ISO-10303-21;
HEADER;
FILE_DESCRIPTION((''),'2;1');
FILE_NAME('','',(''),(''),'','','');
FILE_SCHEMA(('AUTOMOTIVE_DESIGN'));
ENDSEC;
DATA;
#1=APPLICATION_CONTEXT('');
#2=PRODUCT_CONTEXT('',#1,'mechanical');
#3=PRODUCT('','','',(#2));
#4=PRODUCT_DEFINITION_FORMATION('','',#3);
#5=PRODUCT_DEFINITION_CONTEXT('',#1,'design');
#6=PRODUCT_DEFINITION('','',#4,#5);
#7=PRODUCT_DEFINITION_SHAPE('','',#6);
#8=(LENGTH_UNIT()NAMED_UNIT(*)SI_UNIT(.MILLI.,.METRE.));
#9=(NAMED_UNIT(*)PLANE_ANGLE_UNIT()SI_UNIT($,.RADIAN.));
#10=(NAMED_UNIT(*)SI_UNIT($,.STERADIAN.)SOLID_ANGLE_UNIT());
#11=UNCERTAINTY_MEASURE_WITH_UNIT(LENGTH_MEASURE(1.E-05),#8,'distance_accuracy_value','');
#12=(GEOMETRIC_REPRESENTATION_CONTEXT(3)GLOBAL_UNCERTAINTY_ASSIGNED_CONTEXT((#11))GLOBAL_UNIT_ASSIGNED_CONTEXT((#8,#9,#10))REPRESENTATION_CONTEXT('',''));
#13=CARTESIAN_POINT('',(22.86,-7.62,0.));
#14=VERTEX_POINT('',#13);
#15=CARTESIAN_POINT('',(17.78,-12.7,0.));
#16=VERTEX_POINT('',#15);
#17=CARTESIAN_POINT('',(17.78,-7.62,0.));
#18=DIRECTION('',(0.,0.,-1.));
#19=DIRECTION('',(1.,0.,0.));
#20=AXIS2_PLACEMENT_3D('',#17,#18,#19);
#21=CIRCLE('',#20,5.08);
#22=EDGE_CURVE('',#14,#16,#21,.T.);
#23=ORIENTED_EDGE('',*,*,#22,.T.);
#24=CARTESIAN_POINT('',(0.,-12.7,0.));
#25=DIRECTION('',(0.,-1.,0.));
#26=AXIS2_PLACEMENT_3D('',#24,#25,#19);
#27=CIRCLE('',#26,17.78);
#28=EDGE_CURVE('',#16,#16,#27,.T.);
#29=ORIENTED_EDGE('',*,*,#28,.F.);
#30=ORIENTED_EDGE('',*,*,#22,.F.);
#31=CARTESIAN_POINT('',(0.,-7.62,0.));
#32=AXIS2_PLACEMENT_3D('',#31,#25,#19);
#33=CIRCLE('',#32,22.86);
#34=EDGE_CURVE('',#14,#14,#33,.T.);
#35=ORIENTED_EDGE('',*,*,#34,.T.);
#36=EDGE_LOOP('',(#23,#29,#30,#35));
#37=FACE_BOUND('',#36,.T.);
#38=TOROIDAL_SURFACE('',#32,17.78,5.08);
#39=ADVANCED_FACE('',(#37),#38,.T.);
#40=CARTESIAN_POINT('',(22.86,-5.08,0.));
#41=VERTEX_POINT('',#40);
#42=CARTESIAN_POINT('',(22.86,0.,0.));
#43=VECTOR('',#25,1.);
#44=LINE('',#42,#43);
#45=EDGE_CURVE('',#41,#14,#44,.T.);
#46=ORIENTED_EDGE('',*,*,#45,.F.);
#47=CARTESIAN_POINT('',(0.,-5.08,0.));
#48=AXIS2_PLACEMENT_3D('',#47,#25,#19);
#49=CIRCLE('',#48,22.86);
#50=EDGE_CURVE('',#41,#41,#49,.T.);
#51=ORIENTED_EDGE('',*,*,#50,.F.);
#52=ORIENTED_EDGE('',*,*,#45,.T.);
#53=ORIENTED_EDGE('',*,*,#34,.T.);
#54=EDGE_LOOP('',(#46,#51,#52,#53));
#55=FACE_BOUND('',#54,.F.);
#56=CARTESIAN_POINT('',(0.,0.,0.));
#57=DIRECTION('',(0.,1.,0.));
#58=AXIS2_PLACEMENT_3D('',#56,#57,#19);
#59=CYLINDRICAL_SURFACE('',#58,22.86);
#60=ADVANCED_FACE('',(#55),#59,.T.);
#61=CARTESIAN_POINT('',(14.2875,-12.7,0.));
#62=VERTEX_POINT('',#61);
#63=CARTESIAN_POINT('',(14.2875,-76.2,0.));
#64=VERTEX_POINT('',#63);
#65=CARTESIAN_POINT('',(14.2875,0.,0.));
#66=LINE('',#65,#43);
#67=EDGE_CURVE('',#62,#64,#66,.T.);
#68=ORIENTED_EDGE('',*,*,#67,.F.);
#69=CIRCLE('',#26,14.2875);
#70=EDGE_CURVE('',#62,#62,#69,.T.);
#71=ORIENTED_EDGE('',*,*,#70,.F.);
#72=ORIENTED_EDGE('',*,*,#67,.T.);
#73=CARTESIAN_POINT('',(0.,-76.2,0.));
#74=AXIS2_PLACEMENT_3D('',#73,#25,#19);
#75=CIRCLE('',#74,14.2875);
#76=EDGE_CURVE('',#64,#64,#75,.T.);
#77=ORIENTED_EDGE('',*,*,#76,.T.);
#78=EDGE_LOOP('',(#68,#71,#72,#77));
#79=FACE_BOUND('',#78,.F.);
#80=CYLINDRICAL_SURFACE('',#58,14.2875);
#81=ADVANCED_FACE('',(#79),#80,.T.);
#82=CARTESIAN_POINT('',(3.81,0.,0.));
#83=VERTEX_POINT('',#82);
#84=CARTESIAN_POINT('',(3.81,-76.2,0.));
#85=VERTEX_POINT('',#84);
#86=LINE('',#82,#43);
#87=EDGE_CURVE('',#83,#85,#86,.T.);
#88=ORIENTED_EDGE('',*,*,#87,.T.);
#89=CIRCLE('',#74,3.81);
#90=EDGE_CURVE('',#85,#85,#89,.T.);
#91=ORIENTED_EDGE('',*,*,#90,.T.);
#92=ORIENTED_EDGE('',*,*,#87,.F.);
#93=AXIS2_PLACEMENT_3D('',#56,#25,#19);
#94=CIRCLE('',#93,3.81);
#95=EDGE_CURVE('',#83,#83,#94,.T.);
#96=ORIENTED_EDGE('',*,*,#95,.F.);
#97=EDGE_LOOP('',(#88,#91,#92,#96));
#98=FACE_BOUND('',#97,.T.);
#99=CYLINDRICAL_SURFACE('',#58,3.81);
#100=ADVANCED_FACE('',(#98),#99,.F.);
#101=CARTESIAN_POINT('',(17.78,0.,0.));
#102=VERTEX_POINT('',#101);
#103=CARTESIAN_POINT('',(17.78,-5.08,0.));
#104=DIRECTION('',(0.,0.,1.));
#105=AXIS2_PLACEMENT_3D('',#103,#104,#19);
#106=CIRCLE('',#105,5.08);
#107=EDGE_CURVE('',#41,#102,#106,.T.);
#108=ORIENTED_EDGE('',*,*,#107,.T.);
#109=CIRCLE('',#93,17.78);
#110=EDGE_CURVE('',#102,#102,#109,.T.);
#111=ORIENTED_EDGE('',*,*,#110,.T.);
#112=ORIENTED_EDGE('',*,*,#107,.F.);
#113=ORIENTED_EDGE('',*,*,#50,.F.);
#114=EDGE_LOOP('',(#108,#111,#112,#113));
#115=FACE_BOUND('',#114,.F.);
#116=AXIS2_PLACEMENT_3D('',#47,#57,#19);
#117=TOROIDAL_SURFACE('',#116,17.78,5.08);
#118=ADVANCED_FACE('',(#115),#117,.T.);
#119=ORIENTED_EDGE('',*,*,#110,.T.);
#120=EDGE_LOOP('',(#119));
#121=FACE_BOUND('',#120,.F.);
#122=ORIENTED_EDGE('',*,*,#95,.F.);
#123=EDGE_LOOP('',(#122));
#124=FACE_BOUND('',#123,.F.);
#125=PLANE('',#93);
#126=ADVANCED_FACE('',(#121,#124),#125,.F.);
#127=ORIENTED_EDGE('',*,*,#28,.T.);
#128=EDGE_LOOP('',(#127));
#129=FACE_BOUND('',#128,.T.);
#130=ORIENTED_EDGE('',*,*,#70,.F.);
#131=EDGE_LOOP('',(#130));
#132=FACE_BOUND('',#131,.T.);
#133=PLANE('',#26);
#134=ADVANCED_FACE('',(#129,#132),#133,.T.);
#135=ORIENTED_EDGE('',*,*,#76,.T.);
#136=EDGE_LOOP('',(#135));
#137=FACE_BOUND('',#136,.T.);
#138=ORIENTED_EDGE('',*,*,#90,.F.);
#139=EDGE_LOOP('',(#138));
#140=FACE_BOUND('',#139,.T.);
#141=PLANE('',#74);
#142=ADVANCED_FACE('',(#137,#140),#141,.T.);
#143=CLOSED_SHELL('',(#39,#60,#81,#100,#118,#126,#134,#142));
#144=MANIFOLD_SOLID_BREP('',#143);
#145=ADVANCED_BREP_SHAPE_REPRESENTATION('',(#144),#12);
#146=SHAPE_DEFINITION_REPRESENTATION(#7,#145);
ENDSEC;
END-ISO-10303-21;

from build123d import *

# Parameters (mm, degrees)
F0_R     = 22.86
F0_R_2   = 14.2875
F2_DEPTH = 12.7
F3_R     = 5.08
F0_R_3   = 3.81
F5_DEPTH = 76.2


# Not quite as in the source:
# - the program builds the solid bodies; features that only make, move or delete a surface that nothing else refers to are left out


with BuildPart() as f2:
    # F0 (on Front) → F2 (new body)
    with BuildSketch(Plane.XZ):
        Circle(F0_R)
        Circle(F0_R_2, mode=Mode.SUBTRACT)
    extrude(amount=F2_DEPTH)

    # F3
    f3_edges = [f2.edges().sort_by_distance(p)[0] for p in [
        (-22.86, 0, 0),
        (-22.86, -12.7, 0),
    ]]
    fillet(f3_edges, radius=F3_R)

    # F0 (on Front) → F5 (join)
    with BuildSketch(Plane.XZ):
        Circle(F0_R_2)
        Circle(F0_R_3, mode=Mode.SUBTRACT)
    extrude(amount=F5_DEPTH)


solid = f2.part
